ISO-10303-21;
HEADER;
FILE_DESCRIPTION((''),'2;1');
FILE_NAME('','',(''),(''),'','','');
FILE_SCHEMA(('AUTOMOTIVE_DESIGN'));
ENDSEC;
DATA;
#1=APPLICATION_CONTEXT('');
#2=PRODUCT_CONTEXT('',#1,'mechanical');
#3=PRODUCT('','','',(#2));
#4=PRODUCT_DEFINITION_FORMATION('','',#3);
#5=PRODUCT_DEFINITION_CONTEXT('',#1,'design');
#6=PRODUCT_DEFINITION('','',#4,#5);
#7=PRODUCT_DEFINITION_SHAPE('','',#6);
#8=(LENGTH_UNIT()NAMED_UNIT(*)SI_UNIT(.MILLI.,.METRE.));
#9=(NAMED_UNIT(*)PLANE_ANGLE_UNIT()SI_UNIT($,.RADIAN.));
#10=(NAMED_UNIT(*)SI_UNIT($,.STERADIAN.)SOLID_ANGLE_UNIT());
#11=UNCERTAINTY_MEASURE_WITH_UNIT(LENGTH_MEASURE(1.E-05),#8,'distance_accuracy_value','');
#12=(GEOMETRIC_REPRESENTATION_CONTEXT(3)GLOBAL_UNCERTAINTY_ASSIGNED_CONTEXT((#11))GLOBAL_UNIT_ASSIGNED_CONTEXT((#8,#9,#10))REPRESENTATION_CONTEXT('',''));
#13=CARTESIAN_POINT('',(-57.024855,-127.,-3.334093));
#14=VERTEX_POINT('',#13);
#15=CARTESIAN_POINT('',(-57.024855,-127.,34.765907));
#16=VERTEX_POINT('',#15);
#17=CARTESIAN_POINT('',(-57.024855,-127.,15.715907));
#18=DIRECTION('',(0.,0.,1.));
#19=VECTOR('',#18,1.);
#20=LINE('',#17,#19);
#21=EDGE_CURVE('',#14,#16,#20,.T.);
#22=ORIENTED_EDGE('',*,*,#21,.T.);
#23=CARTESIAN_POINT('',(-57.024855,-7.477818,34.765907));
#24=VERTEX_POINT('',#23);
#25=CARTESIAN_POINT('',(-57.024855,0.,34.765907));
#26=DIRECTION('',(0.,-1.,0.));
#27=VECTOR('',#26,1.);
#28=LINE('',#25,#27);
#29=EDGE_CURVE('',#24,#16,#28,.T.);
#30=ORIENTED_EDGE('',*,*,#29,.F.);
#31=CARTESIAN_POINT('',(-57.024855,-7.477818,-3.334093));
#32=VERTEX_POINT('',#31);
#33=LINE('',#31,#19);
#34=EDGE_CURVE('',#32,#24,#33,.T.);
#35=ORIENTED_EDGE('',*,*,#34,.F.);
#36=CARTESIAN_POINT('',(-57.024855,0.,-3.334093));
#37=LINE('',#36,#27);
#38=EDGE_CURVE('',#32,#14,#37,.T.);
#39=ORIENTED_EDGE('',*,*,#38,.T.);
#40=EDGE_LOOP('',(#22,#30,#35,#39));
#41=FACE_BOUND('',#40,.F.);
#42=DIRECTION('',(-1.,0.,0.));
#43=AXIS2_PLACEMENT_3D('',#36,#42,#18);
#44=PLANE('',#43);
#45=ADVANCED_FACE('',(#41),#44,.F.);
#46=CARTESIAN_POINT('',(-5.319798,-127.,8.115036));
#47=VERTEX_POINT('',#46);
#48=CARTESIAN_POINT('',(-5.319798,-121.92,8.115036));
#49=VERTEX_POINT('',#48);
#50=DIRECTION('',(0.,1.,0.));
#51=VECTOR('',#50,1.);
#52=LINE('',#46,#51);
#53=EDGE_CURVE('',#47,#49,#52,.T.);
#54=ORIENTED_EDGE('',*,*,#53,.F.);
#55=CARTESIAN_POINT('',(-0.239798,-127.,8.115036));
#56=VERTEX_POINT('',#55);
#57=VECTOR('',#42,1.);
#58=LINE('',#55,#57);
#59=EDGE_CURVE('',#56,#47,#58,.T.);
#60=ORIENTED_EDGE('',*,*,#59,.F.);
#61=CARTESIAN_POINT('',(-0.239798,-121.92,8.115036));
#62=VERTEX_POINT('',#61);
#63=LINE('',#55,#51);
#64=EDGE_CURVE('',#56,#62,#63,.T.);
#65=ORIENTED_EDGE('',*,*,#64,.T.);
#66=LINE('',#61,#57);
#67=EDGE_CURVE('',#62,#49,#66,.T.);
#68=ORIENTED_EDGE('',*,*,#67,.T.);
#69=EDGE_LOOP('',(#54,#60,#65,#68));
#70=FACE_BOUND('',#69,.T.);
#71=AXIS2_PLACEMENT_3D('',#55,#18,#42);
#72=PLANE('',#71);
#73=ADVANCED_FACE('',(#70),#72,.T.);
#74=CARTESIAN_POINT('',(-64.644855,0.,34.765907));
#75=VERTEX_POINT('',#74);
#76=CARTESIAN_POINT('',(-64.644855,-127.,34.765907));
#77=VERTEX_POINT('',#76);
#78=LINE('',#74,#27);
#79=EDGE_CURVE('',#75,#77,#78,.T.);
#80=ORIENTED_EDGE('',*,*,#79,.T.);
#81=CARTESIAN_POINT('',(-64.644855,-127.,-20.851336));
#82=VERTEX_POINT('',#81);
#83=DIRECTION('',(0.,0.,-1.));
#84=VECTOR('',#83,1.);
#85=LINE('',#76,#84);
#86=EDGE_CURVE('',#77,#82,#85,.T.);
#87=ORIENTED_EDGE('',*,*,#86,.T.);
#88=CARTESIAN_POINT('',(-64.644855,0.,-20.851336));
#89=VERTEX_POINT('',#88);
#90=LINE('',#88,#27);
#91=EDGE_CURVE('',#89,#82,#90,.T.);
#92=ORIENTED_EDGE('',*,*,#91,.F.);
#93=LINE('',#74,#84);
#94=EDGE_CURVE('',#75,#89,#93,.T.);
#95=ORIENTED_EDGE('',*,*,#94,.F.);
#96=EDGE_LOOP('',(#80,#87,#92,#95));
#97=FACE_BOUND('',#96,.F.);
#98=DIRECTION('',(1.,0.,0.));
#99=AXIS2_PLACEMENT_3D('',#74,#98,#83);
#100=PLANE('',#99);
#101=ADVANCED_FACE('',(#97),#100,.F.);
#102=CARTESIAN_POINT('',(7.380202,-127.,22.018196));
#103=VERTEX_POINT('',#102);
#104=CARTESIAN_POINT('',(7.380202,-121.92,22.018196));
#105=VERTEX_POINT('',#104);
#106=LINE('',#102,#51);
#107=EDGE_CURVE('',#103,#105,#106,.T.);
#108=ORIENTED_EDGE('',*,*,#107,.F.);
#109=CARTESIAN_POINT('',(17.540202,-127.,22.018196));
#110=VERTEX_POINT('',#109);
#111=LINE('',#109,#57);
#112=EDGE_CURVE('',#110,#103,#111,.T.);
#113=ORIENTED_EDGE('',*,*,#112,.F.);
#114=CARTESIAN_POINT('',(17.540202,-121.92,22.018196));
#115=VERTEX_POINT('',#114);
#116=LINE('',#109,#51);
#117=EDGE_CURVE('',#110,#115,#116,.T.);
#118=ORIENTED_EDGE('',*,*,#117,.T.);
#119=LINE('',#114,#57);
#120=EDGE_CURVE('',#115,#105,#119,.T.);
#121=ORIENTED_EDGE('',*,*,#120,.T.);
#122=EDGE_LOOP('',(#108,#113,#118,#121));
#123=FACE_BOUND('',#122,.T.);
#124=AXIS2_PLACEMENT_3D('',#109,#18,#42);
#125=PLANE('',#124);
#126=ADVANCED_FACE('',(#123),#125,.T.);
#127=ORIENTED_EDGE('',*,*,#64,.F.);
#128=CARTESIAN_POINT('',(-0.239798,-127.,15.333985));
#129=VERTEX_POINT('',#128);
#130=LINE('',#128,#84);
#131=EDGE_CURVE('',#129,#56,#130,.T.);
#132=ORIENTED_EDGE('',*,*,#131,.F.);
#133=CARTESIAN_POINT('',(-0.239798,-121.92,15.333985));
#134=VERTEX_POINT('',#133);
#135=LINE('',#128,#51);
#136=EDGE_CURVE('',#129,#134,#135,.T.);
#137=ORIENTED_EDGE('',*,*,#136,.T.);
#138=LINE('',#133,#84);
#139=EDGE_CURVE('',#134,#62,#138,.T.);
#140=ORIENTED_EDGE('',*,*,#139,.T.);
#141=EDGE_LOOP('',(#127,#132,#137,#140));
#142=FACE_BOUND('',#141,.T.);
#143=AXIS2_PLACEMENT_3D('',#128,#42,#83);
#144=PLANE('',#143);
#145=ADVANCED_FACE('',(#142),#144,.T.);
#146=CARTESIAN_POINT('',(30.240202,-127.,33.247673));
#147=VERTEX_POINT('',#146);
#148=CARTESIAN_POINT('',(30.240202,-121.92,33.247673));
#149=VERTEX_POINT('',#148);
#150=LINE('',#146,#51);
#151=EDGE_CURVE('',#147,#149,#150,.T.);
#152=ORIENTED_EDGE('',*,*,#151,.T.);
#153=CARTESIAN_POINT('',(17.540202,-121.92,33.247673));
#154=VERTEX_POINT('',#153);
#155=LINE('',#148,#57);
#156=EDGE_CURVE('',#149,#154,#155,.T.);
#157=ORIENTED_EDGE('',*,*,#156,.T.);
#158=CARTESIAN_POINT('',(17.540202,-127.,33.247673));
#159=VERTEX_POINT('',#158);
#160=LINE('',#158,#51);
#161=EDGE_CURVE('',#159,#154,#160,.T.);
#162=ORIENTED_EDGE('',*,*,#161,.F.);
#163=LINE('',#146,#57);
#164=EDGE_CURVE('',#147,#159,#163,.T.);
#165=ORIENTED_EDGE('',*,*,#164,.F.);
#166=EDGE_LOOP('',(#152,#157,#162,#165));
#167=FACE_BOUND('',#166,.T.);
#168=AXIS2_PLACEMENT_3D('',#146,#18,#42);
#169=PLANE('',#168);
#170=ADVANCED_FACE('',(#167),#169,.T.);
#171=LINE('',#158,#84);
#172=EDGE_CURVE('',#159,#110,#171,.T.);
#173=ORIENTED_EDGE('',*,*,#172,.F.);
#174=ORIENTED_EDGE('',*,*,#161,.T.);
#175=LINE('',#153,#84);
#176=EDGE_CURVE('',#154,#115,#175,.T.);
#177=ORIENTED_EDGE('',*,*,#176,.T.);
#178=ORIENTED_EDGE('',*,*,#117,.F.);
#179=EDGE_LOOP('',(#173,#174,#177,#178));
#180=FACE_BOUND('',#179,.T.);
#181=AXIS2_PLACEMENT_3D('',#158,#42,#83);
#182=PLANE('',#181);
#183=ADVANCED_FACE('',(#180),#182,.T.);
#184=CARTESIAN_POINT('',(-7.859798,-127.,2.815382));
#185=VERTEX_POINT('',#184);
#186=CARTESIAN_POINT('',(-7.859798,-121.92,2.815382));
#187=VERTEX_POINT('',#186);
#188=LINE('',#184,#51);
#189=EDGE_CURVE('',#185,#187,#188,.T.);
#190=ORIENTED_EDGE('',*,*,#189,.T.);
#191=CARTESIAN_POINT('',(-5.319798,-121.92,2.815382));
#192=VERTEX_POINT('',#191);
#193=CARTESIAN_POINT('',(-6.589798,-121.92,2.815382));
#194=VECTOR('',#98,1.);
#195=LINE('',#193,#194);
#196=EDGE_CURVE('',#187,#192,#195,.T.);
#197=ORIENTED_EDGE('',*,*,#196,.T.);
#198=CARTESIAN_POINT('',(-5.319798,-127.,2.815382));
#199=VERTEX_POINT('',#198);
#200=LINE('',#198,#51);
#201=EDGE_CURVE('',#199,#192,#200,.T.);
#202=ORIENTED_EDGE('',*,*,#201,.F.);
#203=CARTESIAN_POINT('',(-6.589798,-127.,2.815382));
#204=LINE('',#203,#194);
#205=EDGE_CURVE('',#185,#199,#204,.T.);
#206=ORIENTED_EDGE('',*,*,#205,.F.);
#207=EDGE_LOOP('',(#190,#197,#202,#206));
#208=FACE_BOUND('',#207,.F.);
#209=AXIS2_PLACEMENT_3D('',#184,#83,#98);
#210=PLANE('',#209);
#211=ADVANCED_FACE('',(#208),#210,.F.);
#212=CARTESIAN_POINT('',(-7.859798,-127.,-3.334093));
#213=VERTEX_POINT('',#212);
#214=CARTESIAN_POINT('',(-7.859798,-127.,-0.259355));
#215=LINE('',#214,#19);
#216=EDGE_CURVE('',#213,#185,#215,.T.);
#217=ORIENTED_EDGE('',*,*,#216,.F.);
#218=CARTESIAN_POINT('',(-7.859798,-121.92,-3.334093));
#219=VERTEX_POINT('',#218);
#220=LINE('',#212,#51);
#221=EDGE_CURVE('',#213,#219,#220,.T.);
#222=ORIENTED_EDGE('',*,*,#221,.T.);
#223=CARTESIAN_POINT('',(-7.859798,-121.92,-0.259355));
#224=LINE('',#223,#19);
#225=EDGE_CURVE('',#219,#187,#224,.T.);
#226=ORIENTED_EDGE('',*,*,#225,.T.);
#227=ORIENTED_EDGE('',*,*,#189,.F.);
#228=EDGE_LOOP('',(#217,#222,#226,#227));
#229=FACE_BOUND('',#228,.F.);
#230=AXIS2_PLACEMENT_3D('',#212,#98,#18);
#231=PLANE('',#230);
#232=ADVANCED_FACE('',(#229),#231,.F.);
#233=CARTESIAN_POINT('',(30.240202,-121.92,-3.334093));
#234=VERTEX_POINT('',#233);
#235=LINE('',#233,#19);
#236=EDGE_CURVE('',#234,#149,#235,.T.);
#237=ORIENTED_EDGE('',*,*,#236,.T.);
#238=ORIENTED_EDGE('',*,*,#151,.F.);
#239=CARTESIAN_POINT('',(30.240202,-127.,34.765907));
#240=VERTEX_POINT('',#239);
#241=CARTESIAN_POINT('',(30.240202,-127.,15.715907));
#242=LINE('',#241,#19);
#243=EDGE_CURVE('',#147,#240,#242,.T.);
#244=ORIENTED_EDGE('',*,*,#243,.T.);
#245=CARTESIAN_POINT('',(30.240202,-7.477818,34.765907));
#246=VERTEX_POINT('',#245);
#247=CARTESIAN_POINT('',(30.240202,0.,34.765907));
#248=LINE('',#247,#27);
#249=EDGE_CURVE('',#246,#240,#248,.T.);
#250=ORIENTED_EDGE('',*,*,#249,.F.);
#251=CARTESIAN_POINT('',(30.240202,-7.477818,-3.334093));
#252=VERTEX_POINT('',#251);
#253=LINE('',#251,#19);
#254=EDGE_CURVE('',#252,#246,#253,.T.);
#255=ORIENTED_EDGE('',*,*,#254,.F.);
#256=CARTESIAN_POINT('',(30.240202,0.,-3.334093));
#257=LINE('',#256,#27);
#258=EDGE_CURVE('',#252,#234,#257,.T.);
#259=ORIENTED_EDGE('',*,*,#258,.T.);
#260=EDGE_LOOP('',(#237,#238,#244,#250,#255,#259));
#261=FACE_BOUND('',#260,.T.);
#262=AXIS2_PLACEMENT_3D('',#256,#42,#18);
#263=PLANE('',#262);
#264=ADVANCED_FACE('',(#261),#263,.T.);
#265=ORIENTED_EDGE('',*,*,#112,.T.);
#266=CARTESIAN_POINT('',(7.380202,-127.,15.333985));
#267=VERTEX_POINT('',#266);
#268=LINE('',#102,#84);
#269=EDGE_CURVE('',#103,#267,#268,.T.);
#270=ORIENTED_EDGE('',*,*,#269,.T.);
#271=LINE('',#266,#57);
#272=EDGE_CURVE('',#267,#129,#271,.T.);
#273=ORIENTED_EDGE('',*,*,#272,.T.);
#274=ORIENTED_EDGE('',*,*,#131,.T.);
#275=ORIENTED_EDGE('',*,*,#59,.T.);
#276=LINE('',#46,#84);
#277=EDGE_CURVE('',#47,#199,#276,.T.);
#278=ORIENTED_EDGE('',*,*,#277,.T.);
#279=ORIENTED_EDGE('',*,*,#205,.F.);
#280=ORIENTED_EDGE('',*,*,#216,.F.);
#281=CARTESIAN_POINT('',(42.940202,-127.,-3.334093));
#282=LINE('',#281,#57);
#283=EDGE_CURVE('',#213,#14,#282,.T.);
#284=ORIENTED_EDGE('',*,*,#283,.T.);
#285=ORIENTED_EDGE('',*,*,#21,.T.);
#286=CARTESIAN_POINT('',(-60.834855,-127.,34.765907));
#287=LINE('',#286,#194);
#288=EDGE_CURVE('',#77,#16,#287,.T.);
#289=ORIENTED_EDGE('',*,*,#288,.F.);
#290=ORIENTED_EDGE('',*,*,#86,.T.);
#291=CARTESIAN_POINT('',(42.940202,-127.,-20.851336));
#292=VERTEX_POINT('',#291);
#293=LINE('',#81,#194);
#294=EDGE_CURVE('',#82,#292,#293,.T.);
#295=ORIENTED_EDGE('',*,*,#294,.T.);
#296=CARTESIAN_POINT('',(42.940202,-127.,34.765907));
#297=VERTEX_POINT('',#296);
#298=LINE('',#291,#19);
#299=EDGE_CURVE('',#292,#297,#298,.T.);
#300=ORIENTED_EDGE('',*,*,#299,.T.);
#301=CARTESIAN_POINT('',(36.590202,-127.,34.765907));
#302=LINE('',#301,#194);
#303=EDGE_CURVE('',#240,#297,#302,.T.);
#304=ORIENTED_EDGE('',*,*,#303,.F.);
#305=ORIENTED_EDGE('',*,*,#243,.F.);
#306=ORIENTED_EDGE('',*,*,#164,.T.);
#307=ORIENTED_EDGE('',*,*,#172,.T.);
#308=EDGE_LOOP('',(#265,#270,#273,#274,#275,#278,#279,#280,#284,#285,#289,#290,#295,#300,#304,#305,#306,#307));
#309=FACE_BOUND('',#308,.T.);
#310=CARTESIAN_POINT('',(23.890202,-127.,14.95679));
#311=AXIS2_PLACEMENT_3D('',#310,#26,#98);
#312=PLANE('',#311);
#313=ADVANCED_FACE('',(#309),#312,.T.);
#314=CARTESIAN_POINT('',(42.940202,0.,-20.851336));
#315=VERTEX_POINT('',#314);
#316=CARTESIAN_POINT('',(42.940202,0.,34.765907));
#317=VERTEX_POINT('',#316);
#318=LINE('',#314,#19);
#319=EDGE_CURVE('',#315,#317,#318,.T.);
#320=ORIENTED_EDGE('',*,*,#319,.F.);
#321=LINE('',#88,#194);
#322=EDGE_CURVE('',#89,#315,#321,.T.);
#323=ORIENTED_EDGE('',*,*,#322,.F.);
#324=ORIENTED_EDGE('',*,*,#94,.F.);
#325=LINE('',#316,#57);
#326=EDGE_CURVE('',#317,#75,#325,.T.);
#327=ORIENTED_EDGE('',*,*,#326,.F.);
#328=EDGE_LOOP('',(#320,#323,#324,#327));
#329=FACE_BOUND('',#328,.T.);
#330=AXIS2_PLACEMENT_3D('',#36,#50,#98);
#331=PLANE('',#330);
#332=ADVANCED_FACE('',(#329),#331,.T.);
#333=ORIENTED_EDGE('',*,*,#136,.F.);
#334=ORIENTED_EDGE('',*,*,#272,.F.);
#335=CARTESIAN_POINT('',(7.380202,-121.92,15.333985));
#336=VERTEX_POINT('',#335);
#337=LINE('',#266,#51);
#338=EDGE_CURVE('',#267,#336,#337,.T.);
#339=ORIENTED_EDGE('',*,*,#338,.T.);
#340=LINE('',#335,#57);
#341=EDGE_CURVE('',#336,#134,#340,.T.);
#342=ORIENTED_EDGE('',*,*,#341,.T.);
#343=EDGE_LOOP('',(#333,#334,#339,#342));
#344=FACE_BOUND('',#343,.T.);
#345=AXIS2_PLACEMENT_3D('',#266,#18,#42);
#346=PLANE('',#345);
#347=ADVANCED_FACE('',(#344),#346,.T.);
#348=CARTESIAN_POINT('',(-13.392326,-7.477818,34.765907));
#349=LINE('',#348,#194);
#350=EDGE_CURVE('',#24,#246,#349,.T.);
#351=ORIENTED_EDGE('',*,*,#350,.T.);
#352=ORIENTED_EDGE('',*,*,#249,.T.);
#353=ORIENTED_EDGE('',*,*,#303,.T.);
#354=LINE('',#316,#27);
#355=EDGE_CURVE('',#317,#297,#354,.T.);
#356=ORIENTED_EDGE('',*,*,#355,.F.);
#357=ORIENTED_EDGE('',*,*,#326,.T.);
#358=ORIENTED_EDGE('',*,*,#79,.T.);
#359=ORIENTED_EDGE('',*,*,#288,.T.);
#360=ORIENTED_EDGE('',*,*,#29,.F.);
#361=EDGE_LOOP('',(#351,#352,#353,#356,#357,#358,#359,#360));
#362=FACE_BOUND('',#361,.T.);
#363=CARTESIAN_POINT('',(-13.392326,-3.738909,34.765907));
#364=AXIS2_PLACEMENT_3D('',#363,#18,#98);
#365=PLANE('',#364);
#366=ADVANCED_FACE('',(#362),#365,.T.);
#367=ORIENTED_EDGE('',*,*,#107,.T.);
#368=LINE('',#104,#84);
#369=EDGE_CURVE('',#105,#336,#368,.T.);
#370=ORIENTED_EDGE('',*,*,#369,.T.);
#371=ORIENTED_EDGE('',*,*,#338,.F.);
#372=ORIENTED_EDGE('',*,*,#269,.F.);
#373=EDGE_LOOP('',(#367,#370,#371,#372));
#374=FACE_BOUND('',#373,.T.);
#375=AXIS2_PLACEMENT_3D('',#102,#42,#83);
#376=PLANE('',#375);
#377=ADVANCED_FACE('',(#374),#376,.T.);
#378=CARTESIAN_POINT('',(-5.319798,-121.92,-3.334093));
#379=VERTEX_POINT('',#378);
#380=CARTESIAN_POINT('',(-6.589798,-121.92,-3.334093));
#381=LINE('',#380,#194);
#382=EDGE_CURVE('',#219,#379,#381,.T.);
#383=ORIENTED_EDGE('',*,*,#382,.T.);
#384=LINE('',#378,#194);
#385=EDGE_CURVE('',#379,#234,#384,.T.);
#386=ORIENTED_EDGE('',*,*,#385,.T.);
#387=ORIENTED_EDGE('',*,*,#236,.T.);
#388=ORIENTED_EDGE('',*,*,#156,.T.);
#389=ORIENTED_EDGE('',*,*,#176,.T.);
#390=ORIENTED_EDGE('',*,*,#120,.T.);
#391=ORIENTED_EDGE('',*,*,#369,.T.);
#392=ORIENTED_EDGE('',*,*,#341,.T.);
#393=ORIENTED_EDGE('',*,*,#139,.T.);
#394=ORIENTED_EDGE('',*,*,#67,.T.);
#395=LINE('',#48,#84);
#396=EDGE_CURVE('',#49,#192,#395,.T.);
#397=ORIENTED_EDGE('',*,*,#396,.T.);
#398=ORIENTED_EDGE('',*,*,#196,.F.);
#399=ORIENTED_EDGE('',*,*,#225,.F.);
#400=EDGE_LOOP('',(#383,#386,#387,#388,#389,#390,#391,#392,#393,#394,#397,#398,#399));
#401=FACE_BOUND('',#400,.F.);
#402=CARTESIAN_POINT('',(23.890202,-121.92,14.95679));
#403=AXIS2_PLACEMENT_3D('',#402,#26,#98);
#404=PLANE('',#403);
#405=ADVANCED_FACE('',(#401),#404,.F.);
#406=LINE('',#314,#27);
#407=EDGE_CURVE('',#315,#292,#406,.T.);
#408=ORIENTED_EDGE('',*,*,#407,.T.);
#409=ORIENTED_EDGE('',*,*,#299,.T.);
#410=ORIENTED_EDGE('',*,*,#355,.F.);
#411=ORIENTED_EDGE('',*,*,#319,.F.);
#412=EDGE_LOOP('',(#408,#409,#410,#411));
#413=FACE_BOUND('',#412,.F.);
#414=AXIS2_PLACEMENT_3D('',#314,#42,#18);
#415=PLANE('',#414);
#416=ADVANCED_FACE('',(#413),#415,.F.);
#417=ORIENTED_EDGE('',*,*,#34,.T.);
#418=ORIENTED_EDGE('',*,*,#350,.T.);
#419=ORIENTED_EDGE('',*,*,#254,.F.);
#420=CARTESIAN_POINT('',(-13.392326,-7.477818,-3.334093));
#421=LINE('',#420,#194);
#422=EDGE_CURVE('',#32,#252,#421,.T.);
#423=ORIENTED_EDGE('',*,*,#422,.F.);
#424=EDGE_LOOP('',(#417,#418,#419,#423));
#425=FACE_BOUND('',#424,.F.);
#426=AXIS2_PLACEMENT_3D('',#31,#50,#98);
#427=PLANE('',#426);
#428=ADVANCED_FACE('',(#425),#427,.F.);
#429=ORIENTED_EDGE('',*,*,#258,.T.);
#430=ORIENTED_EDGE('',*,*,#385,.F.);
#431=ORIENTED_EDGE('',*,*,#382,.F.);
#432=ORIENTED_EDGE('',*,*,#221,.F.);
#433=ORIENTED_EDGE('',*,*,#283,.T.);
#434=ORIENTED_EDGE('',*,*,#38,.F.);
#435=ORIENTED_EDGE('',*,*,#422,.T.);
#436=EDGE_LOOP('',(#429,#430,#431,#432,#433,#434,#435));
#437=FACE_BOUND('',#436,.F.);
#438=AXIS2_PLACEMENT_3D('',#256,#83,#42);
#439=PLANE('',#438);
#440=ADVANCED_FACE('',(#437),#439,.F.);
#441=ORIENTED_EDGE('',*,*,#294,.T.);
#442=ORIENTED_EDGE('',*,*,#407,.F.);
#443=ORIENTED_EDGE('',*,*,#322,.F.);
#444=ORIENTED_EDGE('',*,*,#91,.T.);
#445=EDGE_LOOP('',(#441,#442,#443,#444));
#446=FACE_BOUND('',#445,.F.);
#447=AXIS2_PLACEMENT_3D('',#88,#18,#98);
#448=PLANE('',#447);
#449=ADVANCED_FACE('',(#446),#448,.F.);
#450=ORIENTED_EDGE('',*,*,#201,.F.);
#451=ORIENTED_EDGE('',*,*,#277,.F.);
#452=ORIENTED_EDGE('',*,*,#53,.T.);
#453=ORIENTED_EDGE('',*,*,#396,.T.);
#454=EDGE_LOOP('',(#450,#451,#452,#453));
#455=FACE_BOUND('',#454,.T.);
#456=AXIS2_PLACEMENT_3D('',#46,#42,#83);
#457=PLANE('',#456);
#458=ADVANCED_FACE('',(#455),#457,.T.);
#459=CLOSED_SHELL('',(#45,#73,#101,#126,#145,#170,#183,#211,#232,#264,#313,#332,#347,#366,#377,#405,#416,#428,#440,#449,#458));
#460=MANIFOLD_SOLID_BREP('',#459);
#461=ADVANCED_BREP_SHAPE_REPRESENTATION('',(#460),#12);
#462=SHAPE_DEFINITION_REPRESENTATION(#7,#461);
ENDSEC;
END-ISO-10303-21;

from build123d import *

# Parameters (mm, degrees)
F0_W     = 7.62
F0_H     = 38.1
F0_W_2   = 12.7
F1_DEPTH = 127
F2_W     = 87.2650571496
F2_H     = 7.4778180569
F3_DEPTH = 38.1
F5_W     = 2.54
F5_H     = 6.1494747632
F6_DEPTH = 5.08


with BuildPart() as f1:
    # F0 (on Front) → F1 (new body)
    with BuildSketch(Plane.XZ):
        Polygon((-64.6448548068, -3.3340927702), (-64.6448548068, -20.8513359327), (42.9402023428, -20.8513359327), (42.9402023428, -3.3340927702), (30.2402023428, -3.3340927702), (-57.0248548068, -3.3340927702), align=None)
        with Locations((-60.8348548068, 15.7159072298)):
            Rectangle(F0_W, F0_H)
        with Locations((36.5902023428, 15.7159072298)):
            Rectangle(F0_W_2, F0_H)
    extrude(amount=F1_DEPTH)

    # F2 (on face) → F3 (join)
    with BuildSketch(Plane.XY.offset(-3.3340927702)):
        with Locations((-13.392326232, -3.7389090285)):
            Rectangle(F2_W, F2_H)
    extrude(amount=F3_DEPTH)

    # F5 (on face) → F6 (join)
    with BuildSketch(Plane.XZ.offset(127)):
        Polygon((30.2402023428, -3.3340927702), (30.2402023428, 33.2476731723), (17.5402023428, 33.2476731723), (17.5402023428, 22.0181959489), (17.5402023428, -3.3340927702), align=None)
        Polygon((17.5402023428, -3.3340927702), (17.5402023428, 22.0181959489), (7.3802023428, 22.0181959489), (7.3802023428, 15.3339850341), (7.3802023428, -3.3340927702), align=None)
        Polygon((-0.2397976572, -3.3340927702), (7.3802023428, -3.3340927702), (7.3802023428, 15.3339850341), (-0.2397976572, 15.3339850341), (-0.2397976572, 8.1150363277), align=None)
        Polygon((-5.3197976572, -3.3340927702), (-0.2397976572, -3.3340927702), (-0.2397976572, 8.1150363277), (-5.3197976572, 8.1150363277), (-5.3197976572, 2.8153819931), align=None)
        with Locations((-6.5897976572, -0.2593553885)):
            Rectangle(F5_W, F5_H)
    extrude(amount=-F6_DEPTH)


solid = f1.part
